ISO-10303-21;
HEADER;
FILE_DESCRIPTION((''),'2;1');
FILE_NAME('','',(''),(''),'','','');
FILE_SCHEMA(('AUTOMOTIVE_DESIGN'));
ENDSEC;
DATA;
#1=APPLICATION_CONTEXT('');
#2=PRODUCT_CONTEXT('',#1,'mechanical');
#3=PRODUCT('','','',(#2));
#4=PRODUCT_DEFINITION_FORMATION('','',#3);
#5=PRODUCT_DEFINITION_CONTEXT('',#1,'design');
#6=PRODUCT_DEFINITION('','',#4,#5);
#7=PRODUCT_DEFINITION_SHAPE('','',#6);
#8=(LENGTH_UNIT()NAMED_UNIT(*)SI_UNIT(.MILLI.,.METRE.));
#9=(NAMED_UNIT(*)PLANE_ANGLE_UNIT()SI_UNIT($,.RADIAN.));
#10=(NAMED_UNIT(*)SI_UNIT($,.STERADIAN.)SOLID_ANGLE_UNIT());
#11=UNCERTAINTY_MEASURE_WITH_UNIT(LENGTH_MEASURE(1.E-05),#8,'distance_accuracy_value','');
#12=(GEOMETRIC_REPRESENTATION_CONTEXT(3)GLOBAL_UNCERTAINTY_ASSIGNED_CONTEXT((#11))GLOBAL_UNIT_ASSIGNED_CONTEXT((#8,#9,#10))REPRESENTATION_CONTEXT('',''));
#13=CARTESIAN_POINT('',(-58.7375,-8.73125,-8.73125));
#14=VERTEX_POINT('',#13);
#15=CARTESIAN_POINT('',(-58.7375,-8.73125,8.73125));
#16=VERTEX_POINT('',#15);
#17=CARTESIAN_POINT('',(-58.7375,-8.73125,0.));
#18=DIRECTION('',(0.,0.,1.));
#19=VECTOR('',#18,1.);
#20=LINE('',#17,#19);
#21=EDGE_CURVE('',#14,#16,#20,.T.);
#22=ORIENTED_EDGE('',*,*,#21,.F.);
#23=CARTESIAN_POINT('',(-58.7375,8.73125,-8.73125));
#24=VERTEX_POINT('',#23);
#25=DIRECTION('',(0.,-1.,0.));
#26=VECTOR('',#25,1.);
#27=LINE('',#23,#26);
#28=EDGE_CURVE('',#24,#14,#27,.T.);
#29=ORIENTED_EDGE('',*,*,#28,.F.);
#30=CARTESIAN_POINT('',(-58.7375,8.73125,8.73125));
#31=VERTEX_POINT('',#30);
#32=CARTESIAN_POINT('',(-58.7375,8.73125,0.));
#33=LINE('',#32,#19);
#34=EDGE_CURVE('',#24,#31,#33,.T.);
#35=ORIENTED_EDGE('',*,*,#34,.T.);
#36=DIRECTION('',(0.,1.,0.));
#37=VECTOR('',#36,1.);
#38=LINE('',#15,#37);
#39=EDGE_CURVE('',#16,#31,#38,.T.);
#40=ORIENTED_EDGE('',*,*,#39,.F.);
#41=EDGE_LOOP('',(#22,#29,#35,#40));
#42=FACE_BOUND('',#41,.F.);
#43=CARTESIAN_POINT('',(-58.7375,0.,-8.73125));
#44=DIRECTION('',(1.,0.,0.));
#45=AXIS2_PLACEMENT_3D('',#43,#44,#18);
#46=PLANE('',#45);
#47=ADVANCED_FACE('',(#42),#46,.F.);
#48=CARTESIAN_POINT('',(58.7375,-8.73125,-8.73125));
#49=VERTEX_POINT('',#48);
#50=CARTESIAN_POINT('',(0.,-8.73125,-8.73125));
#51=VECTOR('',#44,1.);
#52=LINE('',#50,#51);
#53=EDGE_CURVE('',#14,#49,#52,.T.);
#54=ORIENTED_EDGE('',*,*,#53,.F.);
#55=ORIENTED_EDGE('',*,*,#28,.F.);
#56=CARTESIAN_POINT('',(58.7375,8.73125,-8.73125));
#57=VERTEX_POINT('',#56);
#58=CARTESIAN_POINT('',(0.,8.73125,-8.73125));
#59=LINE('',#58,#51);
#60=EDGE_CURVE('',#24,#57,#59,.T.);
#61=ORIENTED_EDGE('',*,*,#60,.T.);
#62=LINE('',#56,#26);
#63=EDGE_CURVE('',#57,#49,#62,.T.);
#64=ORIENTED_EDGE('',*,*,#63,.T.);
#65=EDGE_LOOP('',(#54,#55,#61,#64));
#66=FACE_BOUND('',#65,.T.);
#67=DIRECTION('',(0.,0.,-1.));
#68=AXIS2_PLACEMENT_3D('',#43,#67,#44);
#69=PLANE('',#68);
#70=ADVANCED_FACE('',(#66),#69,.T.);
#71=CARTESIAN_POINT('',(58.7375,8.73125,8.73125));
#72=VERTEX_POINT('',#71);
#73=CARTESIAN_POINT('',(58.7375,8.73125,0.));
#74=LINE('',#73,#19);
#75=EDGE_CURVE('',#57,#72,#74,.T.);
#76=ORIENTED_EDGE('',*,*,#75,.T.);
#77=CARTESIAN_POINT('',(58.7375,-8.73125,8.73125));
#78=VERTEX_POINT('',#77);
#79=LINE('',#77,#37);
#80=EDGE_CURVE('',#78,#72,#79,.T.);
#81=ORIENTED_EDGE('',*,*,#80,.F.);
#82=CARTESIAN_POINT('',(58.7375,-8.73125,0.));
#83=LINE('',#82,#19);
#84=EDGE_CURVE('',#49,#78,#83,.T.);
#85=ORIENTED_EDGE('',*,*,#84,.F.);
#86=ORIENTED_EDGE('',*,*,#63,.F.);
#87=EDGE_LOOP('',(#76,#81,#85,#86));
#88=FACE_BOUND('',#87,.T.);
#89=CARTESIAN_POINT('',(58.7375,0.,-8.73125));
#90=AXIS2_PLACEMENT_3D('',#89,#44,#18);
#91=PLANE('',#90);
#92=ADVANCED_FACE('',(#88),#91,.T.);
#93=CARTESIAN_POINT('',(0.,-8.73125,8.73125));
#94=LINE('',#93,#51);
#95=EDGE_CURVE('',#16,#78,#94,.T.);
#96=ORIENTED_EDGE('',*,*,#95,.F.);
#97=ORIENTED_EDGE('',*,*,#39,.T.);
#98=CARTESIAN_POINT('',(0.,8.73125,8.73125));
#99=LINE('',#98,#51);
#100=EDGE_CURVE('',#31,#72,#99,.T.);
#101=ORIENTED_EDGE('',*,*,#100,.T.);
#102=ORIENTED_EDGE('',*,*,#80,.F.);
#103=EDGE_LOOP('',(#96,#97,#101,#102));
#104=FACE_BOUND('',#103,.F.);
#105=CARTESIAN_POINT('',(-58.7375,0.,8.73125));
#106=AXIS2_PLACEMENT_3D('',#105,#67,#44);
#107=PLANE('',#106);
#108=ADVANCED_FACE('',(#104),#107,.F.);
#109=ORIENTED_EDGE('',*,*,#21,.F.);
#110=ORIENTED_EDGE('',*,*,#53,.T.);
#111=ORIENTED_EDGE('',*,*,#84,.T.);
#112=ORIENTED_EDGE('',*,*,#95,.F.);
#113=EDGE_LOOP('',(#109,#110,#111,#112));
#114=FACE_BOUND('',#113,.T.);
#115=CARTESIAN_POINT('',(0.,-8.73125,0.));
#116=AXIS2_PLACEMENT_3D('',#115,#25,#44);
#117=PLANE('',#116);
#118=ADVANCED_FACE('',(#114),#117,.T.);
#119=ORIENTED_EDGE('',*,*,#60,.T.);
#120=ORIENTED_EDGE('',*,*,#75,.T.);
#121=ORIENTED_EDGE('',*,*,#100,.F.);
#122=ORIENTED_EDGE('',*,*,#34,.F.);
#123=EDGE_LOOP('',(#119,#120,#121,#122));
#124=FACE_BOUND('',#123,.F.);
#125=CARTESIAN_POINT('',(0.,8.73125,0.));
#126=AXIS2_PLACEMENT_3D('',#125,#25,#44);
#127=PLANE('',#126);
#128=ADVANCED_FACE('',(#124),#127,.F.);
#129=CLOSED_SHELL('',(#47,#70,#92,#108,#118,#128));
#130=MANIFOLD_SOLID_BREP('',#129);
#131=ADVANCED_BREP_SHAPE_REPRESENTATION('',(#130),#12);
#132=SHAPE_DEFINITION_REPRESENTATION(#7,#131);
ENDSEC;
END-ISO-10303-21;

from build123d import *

# Parameters (mm, degrees)
F0_W     = 117.475
F0_H     = 17.4625
F1_DEPTH = 8.73125


# Not quite as in the source:
# - a length typed as a fraction of an inch, garbled in the dataset ("3 / 203.2 mm" for 3/8 in), is restored


with BuildPart() as f1:
    # F0 (on Front) → F1 (new body, symmetric)
    with BuildSketch(Plane.XZ):
        Rectangle(F0_W, F0_H)
    extrude(amount=F1_DEPTH, both=True)


solid = f1.part
